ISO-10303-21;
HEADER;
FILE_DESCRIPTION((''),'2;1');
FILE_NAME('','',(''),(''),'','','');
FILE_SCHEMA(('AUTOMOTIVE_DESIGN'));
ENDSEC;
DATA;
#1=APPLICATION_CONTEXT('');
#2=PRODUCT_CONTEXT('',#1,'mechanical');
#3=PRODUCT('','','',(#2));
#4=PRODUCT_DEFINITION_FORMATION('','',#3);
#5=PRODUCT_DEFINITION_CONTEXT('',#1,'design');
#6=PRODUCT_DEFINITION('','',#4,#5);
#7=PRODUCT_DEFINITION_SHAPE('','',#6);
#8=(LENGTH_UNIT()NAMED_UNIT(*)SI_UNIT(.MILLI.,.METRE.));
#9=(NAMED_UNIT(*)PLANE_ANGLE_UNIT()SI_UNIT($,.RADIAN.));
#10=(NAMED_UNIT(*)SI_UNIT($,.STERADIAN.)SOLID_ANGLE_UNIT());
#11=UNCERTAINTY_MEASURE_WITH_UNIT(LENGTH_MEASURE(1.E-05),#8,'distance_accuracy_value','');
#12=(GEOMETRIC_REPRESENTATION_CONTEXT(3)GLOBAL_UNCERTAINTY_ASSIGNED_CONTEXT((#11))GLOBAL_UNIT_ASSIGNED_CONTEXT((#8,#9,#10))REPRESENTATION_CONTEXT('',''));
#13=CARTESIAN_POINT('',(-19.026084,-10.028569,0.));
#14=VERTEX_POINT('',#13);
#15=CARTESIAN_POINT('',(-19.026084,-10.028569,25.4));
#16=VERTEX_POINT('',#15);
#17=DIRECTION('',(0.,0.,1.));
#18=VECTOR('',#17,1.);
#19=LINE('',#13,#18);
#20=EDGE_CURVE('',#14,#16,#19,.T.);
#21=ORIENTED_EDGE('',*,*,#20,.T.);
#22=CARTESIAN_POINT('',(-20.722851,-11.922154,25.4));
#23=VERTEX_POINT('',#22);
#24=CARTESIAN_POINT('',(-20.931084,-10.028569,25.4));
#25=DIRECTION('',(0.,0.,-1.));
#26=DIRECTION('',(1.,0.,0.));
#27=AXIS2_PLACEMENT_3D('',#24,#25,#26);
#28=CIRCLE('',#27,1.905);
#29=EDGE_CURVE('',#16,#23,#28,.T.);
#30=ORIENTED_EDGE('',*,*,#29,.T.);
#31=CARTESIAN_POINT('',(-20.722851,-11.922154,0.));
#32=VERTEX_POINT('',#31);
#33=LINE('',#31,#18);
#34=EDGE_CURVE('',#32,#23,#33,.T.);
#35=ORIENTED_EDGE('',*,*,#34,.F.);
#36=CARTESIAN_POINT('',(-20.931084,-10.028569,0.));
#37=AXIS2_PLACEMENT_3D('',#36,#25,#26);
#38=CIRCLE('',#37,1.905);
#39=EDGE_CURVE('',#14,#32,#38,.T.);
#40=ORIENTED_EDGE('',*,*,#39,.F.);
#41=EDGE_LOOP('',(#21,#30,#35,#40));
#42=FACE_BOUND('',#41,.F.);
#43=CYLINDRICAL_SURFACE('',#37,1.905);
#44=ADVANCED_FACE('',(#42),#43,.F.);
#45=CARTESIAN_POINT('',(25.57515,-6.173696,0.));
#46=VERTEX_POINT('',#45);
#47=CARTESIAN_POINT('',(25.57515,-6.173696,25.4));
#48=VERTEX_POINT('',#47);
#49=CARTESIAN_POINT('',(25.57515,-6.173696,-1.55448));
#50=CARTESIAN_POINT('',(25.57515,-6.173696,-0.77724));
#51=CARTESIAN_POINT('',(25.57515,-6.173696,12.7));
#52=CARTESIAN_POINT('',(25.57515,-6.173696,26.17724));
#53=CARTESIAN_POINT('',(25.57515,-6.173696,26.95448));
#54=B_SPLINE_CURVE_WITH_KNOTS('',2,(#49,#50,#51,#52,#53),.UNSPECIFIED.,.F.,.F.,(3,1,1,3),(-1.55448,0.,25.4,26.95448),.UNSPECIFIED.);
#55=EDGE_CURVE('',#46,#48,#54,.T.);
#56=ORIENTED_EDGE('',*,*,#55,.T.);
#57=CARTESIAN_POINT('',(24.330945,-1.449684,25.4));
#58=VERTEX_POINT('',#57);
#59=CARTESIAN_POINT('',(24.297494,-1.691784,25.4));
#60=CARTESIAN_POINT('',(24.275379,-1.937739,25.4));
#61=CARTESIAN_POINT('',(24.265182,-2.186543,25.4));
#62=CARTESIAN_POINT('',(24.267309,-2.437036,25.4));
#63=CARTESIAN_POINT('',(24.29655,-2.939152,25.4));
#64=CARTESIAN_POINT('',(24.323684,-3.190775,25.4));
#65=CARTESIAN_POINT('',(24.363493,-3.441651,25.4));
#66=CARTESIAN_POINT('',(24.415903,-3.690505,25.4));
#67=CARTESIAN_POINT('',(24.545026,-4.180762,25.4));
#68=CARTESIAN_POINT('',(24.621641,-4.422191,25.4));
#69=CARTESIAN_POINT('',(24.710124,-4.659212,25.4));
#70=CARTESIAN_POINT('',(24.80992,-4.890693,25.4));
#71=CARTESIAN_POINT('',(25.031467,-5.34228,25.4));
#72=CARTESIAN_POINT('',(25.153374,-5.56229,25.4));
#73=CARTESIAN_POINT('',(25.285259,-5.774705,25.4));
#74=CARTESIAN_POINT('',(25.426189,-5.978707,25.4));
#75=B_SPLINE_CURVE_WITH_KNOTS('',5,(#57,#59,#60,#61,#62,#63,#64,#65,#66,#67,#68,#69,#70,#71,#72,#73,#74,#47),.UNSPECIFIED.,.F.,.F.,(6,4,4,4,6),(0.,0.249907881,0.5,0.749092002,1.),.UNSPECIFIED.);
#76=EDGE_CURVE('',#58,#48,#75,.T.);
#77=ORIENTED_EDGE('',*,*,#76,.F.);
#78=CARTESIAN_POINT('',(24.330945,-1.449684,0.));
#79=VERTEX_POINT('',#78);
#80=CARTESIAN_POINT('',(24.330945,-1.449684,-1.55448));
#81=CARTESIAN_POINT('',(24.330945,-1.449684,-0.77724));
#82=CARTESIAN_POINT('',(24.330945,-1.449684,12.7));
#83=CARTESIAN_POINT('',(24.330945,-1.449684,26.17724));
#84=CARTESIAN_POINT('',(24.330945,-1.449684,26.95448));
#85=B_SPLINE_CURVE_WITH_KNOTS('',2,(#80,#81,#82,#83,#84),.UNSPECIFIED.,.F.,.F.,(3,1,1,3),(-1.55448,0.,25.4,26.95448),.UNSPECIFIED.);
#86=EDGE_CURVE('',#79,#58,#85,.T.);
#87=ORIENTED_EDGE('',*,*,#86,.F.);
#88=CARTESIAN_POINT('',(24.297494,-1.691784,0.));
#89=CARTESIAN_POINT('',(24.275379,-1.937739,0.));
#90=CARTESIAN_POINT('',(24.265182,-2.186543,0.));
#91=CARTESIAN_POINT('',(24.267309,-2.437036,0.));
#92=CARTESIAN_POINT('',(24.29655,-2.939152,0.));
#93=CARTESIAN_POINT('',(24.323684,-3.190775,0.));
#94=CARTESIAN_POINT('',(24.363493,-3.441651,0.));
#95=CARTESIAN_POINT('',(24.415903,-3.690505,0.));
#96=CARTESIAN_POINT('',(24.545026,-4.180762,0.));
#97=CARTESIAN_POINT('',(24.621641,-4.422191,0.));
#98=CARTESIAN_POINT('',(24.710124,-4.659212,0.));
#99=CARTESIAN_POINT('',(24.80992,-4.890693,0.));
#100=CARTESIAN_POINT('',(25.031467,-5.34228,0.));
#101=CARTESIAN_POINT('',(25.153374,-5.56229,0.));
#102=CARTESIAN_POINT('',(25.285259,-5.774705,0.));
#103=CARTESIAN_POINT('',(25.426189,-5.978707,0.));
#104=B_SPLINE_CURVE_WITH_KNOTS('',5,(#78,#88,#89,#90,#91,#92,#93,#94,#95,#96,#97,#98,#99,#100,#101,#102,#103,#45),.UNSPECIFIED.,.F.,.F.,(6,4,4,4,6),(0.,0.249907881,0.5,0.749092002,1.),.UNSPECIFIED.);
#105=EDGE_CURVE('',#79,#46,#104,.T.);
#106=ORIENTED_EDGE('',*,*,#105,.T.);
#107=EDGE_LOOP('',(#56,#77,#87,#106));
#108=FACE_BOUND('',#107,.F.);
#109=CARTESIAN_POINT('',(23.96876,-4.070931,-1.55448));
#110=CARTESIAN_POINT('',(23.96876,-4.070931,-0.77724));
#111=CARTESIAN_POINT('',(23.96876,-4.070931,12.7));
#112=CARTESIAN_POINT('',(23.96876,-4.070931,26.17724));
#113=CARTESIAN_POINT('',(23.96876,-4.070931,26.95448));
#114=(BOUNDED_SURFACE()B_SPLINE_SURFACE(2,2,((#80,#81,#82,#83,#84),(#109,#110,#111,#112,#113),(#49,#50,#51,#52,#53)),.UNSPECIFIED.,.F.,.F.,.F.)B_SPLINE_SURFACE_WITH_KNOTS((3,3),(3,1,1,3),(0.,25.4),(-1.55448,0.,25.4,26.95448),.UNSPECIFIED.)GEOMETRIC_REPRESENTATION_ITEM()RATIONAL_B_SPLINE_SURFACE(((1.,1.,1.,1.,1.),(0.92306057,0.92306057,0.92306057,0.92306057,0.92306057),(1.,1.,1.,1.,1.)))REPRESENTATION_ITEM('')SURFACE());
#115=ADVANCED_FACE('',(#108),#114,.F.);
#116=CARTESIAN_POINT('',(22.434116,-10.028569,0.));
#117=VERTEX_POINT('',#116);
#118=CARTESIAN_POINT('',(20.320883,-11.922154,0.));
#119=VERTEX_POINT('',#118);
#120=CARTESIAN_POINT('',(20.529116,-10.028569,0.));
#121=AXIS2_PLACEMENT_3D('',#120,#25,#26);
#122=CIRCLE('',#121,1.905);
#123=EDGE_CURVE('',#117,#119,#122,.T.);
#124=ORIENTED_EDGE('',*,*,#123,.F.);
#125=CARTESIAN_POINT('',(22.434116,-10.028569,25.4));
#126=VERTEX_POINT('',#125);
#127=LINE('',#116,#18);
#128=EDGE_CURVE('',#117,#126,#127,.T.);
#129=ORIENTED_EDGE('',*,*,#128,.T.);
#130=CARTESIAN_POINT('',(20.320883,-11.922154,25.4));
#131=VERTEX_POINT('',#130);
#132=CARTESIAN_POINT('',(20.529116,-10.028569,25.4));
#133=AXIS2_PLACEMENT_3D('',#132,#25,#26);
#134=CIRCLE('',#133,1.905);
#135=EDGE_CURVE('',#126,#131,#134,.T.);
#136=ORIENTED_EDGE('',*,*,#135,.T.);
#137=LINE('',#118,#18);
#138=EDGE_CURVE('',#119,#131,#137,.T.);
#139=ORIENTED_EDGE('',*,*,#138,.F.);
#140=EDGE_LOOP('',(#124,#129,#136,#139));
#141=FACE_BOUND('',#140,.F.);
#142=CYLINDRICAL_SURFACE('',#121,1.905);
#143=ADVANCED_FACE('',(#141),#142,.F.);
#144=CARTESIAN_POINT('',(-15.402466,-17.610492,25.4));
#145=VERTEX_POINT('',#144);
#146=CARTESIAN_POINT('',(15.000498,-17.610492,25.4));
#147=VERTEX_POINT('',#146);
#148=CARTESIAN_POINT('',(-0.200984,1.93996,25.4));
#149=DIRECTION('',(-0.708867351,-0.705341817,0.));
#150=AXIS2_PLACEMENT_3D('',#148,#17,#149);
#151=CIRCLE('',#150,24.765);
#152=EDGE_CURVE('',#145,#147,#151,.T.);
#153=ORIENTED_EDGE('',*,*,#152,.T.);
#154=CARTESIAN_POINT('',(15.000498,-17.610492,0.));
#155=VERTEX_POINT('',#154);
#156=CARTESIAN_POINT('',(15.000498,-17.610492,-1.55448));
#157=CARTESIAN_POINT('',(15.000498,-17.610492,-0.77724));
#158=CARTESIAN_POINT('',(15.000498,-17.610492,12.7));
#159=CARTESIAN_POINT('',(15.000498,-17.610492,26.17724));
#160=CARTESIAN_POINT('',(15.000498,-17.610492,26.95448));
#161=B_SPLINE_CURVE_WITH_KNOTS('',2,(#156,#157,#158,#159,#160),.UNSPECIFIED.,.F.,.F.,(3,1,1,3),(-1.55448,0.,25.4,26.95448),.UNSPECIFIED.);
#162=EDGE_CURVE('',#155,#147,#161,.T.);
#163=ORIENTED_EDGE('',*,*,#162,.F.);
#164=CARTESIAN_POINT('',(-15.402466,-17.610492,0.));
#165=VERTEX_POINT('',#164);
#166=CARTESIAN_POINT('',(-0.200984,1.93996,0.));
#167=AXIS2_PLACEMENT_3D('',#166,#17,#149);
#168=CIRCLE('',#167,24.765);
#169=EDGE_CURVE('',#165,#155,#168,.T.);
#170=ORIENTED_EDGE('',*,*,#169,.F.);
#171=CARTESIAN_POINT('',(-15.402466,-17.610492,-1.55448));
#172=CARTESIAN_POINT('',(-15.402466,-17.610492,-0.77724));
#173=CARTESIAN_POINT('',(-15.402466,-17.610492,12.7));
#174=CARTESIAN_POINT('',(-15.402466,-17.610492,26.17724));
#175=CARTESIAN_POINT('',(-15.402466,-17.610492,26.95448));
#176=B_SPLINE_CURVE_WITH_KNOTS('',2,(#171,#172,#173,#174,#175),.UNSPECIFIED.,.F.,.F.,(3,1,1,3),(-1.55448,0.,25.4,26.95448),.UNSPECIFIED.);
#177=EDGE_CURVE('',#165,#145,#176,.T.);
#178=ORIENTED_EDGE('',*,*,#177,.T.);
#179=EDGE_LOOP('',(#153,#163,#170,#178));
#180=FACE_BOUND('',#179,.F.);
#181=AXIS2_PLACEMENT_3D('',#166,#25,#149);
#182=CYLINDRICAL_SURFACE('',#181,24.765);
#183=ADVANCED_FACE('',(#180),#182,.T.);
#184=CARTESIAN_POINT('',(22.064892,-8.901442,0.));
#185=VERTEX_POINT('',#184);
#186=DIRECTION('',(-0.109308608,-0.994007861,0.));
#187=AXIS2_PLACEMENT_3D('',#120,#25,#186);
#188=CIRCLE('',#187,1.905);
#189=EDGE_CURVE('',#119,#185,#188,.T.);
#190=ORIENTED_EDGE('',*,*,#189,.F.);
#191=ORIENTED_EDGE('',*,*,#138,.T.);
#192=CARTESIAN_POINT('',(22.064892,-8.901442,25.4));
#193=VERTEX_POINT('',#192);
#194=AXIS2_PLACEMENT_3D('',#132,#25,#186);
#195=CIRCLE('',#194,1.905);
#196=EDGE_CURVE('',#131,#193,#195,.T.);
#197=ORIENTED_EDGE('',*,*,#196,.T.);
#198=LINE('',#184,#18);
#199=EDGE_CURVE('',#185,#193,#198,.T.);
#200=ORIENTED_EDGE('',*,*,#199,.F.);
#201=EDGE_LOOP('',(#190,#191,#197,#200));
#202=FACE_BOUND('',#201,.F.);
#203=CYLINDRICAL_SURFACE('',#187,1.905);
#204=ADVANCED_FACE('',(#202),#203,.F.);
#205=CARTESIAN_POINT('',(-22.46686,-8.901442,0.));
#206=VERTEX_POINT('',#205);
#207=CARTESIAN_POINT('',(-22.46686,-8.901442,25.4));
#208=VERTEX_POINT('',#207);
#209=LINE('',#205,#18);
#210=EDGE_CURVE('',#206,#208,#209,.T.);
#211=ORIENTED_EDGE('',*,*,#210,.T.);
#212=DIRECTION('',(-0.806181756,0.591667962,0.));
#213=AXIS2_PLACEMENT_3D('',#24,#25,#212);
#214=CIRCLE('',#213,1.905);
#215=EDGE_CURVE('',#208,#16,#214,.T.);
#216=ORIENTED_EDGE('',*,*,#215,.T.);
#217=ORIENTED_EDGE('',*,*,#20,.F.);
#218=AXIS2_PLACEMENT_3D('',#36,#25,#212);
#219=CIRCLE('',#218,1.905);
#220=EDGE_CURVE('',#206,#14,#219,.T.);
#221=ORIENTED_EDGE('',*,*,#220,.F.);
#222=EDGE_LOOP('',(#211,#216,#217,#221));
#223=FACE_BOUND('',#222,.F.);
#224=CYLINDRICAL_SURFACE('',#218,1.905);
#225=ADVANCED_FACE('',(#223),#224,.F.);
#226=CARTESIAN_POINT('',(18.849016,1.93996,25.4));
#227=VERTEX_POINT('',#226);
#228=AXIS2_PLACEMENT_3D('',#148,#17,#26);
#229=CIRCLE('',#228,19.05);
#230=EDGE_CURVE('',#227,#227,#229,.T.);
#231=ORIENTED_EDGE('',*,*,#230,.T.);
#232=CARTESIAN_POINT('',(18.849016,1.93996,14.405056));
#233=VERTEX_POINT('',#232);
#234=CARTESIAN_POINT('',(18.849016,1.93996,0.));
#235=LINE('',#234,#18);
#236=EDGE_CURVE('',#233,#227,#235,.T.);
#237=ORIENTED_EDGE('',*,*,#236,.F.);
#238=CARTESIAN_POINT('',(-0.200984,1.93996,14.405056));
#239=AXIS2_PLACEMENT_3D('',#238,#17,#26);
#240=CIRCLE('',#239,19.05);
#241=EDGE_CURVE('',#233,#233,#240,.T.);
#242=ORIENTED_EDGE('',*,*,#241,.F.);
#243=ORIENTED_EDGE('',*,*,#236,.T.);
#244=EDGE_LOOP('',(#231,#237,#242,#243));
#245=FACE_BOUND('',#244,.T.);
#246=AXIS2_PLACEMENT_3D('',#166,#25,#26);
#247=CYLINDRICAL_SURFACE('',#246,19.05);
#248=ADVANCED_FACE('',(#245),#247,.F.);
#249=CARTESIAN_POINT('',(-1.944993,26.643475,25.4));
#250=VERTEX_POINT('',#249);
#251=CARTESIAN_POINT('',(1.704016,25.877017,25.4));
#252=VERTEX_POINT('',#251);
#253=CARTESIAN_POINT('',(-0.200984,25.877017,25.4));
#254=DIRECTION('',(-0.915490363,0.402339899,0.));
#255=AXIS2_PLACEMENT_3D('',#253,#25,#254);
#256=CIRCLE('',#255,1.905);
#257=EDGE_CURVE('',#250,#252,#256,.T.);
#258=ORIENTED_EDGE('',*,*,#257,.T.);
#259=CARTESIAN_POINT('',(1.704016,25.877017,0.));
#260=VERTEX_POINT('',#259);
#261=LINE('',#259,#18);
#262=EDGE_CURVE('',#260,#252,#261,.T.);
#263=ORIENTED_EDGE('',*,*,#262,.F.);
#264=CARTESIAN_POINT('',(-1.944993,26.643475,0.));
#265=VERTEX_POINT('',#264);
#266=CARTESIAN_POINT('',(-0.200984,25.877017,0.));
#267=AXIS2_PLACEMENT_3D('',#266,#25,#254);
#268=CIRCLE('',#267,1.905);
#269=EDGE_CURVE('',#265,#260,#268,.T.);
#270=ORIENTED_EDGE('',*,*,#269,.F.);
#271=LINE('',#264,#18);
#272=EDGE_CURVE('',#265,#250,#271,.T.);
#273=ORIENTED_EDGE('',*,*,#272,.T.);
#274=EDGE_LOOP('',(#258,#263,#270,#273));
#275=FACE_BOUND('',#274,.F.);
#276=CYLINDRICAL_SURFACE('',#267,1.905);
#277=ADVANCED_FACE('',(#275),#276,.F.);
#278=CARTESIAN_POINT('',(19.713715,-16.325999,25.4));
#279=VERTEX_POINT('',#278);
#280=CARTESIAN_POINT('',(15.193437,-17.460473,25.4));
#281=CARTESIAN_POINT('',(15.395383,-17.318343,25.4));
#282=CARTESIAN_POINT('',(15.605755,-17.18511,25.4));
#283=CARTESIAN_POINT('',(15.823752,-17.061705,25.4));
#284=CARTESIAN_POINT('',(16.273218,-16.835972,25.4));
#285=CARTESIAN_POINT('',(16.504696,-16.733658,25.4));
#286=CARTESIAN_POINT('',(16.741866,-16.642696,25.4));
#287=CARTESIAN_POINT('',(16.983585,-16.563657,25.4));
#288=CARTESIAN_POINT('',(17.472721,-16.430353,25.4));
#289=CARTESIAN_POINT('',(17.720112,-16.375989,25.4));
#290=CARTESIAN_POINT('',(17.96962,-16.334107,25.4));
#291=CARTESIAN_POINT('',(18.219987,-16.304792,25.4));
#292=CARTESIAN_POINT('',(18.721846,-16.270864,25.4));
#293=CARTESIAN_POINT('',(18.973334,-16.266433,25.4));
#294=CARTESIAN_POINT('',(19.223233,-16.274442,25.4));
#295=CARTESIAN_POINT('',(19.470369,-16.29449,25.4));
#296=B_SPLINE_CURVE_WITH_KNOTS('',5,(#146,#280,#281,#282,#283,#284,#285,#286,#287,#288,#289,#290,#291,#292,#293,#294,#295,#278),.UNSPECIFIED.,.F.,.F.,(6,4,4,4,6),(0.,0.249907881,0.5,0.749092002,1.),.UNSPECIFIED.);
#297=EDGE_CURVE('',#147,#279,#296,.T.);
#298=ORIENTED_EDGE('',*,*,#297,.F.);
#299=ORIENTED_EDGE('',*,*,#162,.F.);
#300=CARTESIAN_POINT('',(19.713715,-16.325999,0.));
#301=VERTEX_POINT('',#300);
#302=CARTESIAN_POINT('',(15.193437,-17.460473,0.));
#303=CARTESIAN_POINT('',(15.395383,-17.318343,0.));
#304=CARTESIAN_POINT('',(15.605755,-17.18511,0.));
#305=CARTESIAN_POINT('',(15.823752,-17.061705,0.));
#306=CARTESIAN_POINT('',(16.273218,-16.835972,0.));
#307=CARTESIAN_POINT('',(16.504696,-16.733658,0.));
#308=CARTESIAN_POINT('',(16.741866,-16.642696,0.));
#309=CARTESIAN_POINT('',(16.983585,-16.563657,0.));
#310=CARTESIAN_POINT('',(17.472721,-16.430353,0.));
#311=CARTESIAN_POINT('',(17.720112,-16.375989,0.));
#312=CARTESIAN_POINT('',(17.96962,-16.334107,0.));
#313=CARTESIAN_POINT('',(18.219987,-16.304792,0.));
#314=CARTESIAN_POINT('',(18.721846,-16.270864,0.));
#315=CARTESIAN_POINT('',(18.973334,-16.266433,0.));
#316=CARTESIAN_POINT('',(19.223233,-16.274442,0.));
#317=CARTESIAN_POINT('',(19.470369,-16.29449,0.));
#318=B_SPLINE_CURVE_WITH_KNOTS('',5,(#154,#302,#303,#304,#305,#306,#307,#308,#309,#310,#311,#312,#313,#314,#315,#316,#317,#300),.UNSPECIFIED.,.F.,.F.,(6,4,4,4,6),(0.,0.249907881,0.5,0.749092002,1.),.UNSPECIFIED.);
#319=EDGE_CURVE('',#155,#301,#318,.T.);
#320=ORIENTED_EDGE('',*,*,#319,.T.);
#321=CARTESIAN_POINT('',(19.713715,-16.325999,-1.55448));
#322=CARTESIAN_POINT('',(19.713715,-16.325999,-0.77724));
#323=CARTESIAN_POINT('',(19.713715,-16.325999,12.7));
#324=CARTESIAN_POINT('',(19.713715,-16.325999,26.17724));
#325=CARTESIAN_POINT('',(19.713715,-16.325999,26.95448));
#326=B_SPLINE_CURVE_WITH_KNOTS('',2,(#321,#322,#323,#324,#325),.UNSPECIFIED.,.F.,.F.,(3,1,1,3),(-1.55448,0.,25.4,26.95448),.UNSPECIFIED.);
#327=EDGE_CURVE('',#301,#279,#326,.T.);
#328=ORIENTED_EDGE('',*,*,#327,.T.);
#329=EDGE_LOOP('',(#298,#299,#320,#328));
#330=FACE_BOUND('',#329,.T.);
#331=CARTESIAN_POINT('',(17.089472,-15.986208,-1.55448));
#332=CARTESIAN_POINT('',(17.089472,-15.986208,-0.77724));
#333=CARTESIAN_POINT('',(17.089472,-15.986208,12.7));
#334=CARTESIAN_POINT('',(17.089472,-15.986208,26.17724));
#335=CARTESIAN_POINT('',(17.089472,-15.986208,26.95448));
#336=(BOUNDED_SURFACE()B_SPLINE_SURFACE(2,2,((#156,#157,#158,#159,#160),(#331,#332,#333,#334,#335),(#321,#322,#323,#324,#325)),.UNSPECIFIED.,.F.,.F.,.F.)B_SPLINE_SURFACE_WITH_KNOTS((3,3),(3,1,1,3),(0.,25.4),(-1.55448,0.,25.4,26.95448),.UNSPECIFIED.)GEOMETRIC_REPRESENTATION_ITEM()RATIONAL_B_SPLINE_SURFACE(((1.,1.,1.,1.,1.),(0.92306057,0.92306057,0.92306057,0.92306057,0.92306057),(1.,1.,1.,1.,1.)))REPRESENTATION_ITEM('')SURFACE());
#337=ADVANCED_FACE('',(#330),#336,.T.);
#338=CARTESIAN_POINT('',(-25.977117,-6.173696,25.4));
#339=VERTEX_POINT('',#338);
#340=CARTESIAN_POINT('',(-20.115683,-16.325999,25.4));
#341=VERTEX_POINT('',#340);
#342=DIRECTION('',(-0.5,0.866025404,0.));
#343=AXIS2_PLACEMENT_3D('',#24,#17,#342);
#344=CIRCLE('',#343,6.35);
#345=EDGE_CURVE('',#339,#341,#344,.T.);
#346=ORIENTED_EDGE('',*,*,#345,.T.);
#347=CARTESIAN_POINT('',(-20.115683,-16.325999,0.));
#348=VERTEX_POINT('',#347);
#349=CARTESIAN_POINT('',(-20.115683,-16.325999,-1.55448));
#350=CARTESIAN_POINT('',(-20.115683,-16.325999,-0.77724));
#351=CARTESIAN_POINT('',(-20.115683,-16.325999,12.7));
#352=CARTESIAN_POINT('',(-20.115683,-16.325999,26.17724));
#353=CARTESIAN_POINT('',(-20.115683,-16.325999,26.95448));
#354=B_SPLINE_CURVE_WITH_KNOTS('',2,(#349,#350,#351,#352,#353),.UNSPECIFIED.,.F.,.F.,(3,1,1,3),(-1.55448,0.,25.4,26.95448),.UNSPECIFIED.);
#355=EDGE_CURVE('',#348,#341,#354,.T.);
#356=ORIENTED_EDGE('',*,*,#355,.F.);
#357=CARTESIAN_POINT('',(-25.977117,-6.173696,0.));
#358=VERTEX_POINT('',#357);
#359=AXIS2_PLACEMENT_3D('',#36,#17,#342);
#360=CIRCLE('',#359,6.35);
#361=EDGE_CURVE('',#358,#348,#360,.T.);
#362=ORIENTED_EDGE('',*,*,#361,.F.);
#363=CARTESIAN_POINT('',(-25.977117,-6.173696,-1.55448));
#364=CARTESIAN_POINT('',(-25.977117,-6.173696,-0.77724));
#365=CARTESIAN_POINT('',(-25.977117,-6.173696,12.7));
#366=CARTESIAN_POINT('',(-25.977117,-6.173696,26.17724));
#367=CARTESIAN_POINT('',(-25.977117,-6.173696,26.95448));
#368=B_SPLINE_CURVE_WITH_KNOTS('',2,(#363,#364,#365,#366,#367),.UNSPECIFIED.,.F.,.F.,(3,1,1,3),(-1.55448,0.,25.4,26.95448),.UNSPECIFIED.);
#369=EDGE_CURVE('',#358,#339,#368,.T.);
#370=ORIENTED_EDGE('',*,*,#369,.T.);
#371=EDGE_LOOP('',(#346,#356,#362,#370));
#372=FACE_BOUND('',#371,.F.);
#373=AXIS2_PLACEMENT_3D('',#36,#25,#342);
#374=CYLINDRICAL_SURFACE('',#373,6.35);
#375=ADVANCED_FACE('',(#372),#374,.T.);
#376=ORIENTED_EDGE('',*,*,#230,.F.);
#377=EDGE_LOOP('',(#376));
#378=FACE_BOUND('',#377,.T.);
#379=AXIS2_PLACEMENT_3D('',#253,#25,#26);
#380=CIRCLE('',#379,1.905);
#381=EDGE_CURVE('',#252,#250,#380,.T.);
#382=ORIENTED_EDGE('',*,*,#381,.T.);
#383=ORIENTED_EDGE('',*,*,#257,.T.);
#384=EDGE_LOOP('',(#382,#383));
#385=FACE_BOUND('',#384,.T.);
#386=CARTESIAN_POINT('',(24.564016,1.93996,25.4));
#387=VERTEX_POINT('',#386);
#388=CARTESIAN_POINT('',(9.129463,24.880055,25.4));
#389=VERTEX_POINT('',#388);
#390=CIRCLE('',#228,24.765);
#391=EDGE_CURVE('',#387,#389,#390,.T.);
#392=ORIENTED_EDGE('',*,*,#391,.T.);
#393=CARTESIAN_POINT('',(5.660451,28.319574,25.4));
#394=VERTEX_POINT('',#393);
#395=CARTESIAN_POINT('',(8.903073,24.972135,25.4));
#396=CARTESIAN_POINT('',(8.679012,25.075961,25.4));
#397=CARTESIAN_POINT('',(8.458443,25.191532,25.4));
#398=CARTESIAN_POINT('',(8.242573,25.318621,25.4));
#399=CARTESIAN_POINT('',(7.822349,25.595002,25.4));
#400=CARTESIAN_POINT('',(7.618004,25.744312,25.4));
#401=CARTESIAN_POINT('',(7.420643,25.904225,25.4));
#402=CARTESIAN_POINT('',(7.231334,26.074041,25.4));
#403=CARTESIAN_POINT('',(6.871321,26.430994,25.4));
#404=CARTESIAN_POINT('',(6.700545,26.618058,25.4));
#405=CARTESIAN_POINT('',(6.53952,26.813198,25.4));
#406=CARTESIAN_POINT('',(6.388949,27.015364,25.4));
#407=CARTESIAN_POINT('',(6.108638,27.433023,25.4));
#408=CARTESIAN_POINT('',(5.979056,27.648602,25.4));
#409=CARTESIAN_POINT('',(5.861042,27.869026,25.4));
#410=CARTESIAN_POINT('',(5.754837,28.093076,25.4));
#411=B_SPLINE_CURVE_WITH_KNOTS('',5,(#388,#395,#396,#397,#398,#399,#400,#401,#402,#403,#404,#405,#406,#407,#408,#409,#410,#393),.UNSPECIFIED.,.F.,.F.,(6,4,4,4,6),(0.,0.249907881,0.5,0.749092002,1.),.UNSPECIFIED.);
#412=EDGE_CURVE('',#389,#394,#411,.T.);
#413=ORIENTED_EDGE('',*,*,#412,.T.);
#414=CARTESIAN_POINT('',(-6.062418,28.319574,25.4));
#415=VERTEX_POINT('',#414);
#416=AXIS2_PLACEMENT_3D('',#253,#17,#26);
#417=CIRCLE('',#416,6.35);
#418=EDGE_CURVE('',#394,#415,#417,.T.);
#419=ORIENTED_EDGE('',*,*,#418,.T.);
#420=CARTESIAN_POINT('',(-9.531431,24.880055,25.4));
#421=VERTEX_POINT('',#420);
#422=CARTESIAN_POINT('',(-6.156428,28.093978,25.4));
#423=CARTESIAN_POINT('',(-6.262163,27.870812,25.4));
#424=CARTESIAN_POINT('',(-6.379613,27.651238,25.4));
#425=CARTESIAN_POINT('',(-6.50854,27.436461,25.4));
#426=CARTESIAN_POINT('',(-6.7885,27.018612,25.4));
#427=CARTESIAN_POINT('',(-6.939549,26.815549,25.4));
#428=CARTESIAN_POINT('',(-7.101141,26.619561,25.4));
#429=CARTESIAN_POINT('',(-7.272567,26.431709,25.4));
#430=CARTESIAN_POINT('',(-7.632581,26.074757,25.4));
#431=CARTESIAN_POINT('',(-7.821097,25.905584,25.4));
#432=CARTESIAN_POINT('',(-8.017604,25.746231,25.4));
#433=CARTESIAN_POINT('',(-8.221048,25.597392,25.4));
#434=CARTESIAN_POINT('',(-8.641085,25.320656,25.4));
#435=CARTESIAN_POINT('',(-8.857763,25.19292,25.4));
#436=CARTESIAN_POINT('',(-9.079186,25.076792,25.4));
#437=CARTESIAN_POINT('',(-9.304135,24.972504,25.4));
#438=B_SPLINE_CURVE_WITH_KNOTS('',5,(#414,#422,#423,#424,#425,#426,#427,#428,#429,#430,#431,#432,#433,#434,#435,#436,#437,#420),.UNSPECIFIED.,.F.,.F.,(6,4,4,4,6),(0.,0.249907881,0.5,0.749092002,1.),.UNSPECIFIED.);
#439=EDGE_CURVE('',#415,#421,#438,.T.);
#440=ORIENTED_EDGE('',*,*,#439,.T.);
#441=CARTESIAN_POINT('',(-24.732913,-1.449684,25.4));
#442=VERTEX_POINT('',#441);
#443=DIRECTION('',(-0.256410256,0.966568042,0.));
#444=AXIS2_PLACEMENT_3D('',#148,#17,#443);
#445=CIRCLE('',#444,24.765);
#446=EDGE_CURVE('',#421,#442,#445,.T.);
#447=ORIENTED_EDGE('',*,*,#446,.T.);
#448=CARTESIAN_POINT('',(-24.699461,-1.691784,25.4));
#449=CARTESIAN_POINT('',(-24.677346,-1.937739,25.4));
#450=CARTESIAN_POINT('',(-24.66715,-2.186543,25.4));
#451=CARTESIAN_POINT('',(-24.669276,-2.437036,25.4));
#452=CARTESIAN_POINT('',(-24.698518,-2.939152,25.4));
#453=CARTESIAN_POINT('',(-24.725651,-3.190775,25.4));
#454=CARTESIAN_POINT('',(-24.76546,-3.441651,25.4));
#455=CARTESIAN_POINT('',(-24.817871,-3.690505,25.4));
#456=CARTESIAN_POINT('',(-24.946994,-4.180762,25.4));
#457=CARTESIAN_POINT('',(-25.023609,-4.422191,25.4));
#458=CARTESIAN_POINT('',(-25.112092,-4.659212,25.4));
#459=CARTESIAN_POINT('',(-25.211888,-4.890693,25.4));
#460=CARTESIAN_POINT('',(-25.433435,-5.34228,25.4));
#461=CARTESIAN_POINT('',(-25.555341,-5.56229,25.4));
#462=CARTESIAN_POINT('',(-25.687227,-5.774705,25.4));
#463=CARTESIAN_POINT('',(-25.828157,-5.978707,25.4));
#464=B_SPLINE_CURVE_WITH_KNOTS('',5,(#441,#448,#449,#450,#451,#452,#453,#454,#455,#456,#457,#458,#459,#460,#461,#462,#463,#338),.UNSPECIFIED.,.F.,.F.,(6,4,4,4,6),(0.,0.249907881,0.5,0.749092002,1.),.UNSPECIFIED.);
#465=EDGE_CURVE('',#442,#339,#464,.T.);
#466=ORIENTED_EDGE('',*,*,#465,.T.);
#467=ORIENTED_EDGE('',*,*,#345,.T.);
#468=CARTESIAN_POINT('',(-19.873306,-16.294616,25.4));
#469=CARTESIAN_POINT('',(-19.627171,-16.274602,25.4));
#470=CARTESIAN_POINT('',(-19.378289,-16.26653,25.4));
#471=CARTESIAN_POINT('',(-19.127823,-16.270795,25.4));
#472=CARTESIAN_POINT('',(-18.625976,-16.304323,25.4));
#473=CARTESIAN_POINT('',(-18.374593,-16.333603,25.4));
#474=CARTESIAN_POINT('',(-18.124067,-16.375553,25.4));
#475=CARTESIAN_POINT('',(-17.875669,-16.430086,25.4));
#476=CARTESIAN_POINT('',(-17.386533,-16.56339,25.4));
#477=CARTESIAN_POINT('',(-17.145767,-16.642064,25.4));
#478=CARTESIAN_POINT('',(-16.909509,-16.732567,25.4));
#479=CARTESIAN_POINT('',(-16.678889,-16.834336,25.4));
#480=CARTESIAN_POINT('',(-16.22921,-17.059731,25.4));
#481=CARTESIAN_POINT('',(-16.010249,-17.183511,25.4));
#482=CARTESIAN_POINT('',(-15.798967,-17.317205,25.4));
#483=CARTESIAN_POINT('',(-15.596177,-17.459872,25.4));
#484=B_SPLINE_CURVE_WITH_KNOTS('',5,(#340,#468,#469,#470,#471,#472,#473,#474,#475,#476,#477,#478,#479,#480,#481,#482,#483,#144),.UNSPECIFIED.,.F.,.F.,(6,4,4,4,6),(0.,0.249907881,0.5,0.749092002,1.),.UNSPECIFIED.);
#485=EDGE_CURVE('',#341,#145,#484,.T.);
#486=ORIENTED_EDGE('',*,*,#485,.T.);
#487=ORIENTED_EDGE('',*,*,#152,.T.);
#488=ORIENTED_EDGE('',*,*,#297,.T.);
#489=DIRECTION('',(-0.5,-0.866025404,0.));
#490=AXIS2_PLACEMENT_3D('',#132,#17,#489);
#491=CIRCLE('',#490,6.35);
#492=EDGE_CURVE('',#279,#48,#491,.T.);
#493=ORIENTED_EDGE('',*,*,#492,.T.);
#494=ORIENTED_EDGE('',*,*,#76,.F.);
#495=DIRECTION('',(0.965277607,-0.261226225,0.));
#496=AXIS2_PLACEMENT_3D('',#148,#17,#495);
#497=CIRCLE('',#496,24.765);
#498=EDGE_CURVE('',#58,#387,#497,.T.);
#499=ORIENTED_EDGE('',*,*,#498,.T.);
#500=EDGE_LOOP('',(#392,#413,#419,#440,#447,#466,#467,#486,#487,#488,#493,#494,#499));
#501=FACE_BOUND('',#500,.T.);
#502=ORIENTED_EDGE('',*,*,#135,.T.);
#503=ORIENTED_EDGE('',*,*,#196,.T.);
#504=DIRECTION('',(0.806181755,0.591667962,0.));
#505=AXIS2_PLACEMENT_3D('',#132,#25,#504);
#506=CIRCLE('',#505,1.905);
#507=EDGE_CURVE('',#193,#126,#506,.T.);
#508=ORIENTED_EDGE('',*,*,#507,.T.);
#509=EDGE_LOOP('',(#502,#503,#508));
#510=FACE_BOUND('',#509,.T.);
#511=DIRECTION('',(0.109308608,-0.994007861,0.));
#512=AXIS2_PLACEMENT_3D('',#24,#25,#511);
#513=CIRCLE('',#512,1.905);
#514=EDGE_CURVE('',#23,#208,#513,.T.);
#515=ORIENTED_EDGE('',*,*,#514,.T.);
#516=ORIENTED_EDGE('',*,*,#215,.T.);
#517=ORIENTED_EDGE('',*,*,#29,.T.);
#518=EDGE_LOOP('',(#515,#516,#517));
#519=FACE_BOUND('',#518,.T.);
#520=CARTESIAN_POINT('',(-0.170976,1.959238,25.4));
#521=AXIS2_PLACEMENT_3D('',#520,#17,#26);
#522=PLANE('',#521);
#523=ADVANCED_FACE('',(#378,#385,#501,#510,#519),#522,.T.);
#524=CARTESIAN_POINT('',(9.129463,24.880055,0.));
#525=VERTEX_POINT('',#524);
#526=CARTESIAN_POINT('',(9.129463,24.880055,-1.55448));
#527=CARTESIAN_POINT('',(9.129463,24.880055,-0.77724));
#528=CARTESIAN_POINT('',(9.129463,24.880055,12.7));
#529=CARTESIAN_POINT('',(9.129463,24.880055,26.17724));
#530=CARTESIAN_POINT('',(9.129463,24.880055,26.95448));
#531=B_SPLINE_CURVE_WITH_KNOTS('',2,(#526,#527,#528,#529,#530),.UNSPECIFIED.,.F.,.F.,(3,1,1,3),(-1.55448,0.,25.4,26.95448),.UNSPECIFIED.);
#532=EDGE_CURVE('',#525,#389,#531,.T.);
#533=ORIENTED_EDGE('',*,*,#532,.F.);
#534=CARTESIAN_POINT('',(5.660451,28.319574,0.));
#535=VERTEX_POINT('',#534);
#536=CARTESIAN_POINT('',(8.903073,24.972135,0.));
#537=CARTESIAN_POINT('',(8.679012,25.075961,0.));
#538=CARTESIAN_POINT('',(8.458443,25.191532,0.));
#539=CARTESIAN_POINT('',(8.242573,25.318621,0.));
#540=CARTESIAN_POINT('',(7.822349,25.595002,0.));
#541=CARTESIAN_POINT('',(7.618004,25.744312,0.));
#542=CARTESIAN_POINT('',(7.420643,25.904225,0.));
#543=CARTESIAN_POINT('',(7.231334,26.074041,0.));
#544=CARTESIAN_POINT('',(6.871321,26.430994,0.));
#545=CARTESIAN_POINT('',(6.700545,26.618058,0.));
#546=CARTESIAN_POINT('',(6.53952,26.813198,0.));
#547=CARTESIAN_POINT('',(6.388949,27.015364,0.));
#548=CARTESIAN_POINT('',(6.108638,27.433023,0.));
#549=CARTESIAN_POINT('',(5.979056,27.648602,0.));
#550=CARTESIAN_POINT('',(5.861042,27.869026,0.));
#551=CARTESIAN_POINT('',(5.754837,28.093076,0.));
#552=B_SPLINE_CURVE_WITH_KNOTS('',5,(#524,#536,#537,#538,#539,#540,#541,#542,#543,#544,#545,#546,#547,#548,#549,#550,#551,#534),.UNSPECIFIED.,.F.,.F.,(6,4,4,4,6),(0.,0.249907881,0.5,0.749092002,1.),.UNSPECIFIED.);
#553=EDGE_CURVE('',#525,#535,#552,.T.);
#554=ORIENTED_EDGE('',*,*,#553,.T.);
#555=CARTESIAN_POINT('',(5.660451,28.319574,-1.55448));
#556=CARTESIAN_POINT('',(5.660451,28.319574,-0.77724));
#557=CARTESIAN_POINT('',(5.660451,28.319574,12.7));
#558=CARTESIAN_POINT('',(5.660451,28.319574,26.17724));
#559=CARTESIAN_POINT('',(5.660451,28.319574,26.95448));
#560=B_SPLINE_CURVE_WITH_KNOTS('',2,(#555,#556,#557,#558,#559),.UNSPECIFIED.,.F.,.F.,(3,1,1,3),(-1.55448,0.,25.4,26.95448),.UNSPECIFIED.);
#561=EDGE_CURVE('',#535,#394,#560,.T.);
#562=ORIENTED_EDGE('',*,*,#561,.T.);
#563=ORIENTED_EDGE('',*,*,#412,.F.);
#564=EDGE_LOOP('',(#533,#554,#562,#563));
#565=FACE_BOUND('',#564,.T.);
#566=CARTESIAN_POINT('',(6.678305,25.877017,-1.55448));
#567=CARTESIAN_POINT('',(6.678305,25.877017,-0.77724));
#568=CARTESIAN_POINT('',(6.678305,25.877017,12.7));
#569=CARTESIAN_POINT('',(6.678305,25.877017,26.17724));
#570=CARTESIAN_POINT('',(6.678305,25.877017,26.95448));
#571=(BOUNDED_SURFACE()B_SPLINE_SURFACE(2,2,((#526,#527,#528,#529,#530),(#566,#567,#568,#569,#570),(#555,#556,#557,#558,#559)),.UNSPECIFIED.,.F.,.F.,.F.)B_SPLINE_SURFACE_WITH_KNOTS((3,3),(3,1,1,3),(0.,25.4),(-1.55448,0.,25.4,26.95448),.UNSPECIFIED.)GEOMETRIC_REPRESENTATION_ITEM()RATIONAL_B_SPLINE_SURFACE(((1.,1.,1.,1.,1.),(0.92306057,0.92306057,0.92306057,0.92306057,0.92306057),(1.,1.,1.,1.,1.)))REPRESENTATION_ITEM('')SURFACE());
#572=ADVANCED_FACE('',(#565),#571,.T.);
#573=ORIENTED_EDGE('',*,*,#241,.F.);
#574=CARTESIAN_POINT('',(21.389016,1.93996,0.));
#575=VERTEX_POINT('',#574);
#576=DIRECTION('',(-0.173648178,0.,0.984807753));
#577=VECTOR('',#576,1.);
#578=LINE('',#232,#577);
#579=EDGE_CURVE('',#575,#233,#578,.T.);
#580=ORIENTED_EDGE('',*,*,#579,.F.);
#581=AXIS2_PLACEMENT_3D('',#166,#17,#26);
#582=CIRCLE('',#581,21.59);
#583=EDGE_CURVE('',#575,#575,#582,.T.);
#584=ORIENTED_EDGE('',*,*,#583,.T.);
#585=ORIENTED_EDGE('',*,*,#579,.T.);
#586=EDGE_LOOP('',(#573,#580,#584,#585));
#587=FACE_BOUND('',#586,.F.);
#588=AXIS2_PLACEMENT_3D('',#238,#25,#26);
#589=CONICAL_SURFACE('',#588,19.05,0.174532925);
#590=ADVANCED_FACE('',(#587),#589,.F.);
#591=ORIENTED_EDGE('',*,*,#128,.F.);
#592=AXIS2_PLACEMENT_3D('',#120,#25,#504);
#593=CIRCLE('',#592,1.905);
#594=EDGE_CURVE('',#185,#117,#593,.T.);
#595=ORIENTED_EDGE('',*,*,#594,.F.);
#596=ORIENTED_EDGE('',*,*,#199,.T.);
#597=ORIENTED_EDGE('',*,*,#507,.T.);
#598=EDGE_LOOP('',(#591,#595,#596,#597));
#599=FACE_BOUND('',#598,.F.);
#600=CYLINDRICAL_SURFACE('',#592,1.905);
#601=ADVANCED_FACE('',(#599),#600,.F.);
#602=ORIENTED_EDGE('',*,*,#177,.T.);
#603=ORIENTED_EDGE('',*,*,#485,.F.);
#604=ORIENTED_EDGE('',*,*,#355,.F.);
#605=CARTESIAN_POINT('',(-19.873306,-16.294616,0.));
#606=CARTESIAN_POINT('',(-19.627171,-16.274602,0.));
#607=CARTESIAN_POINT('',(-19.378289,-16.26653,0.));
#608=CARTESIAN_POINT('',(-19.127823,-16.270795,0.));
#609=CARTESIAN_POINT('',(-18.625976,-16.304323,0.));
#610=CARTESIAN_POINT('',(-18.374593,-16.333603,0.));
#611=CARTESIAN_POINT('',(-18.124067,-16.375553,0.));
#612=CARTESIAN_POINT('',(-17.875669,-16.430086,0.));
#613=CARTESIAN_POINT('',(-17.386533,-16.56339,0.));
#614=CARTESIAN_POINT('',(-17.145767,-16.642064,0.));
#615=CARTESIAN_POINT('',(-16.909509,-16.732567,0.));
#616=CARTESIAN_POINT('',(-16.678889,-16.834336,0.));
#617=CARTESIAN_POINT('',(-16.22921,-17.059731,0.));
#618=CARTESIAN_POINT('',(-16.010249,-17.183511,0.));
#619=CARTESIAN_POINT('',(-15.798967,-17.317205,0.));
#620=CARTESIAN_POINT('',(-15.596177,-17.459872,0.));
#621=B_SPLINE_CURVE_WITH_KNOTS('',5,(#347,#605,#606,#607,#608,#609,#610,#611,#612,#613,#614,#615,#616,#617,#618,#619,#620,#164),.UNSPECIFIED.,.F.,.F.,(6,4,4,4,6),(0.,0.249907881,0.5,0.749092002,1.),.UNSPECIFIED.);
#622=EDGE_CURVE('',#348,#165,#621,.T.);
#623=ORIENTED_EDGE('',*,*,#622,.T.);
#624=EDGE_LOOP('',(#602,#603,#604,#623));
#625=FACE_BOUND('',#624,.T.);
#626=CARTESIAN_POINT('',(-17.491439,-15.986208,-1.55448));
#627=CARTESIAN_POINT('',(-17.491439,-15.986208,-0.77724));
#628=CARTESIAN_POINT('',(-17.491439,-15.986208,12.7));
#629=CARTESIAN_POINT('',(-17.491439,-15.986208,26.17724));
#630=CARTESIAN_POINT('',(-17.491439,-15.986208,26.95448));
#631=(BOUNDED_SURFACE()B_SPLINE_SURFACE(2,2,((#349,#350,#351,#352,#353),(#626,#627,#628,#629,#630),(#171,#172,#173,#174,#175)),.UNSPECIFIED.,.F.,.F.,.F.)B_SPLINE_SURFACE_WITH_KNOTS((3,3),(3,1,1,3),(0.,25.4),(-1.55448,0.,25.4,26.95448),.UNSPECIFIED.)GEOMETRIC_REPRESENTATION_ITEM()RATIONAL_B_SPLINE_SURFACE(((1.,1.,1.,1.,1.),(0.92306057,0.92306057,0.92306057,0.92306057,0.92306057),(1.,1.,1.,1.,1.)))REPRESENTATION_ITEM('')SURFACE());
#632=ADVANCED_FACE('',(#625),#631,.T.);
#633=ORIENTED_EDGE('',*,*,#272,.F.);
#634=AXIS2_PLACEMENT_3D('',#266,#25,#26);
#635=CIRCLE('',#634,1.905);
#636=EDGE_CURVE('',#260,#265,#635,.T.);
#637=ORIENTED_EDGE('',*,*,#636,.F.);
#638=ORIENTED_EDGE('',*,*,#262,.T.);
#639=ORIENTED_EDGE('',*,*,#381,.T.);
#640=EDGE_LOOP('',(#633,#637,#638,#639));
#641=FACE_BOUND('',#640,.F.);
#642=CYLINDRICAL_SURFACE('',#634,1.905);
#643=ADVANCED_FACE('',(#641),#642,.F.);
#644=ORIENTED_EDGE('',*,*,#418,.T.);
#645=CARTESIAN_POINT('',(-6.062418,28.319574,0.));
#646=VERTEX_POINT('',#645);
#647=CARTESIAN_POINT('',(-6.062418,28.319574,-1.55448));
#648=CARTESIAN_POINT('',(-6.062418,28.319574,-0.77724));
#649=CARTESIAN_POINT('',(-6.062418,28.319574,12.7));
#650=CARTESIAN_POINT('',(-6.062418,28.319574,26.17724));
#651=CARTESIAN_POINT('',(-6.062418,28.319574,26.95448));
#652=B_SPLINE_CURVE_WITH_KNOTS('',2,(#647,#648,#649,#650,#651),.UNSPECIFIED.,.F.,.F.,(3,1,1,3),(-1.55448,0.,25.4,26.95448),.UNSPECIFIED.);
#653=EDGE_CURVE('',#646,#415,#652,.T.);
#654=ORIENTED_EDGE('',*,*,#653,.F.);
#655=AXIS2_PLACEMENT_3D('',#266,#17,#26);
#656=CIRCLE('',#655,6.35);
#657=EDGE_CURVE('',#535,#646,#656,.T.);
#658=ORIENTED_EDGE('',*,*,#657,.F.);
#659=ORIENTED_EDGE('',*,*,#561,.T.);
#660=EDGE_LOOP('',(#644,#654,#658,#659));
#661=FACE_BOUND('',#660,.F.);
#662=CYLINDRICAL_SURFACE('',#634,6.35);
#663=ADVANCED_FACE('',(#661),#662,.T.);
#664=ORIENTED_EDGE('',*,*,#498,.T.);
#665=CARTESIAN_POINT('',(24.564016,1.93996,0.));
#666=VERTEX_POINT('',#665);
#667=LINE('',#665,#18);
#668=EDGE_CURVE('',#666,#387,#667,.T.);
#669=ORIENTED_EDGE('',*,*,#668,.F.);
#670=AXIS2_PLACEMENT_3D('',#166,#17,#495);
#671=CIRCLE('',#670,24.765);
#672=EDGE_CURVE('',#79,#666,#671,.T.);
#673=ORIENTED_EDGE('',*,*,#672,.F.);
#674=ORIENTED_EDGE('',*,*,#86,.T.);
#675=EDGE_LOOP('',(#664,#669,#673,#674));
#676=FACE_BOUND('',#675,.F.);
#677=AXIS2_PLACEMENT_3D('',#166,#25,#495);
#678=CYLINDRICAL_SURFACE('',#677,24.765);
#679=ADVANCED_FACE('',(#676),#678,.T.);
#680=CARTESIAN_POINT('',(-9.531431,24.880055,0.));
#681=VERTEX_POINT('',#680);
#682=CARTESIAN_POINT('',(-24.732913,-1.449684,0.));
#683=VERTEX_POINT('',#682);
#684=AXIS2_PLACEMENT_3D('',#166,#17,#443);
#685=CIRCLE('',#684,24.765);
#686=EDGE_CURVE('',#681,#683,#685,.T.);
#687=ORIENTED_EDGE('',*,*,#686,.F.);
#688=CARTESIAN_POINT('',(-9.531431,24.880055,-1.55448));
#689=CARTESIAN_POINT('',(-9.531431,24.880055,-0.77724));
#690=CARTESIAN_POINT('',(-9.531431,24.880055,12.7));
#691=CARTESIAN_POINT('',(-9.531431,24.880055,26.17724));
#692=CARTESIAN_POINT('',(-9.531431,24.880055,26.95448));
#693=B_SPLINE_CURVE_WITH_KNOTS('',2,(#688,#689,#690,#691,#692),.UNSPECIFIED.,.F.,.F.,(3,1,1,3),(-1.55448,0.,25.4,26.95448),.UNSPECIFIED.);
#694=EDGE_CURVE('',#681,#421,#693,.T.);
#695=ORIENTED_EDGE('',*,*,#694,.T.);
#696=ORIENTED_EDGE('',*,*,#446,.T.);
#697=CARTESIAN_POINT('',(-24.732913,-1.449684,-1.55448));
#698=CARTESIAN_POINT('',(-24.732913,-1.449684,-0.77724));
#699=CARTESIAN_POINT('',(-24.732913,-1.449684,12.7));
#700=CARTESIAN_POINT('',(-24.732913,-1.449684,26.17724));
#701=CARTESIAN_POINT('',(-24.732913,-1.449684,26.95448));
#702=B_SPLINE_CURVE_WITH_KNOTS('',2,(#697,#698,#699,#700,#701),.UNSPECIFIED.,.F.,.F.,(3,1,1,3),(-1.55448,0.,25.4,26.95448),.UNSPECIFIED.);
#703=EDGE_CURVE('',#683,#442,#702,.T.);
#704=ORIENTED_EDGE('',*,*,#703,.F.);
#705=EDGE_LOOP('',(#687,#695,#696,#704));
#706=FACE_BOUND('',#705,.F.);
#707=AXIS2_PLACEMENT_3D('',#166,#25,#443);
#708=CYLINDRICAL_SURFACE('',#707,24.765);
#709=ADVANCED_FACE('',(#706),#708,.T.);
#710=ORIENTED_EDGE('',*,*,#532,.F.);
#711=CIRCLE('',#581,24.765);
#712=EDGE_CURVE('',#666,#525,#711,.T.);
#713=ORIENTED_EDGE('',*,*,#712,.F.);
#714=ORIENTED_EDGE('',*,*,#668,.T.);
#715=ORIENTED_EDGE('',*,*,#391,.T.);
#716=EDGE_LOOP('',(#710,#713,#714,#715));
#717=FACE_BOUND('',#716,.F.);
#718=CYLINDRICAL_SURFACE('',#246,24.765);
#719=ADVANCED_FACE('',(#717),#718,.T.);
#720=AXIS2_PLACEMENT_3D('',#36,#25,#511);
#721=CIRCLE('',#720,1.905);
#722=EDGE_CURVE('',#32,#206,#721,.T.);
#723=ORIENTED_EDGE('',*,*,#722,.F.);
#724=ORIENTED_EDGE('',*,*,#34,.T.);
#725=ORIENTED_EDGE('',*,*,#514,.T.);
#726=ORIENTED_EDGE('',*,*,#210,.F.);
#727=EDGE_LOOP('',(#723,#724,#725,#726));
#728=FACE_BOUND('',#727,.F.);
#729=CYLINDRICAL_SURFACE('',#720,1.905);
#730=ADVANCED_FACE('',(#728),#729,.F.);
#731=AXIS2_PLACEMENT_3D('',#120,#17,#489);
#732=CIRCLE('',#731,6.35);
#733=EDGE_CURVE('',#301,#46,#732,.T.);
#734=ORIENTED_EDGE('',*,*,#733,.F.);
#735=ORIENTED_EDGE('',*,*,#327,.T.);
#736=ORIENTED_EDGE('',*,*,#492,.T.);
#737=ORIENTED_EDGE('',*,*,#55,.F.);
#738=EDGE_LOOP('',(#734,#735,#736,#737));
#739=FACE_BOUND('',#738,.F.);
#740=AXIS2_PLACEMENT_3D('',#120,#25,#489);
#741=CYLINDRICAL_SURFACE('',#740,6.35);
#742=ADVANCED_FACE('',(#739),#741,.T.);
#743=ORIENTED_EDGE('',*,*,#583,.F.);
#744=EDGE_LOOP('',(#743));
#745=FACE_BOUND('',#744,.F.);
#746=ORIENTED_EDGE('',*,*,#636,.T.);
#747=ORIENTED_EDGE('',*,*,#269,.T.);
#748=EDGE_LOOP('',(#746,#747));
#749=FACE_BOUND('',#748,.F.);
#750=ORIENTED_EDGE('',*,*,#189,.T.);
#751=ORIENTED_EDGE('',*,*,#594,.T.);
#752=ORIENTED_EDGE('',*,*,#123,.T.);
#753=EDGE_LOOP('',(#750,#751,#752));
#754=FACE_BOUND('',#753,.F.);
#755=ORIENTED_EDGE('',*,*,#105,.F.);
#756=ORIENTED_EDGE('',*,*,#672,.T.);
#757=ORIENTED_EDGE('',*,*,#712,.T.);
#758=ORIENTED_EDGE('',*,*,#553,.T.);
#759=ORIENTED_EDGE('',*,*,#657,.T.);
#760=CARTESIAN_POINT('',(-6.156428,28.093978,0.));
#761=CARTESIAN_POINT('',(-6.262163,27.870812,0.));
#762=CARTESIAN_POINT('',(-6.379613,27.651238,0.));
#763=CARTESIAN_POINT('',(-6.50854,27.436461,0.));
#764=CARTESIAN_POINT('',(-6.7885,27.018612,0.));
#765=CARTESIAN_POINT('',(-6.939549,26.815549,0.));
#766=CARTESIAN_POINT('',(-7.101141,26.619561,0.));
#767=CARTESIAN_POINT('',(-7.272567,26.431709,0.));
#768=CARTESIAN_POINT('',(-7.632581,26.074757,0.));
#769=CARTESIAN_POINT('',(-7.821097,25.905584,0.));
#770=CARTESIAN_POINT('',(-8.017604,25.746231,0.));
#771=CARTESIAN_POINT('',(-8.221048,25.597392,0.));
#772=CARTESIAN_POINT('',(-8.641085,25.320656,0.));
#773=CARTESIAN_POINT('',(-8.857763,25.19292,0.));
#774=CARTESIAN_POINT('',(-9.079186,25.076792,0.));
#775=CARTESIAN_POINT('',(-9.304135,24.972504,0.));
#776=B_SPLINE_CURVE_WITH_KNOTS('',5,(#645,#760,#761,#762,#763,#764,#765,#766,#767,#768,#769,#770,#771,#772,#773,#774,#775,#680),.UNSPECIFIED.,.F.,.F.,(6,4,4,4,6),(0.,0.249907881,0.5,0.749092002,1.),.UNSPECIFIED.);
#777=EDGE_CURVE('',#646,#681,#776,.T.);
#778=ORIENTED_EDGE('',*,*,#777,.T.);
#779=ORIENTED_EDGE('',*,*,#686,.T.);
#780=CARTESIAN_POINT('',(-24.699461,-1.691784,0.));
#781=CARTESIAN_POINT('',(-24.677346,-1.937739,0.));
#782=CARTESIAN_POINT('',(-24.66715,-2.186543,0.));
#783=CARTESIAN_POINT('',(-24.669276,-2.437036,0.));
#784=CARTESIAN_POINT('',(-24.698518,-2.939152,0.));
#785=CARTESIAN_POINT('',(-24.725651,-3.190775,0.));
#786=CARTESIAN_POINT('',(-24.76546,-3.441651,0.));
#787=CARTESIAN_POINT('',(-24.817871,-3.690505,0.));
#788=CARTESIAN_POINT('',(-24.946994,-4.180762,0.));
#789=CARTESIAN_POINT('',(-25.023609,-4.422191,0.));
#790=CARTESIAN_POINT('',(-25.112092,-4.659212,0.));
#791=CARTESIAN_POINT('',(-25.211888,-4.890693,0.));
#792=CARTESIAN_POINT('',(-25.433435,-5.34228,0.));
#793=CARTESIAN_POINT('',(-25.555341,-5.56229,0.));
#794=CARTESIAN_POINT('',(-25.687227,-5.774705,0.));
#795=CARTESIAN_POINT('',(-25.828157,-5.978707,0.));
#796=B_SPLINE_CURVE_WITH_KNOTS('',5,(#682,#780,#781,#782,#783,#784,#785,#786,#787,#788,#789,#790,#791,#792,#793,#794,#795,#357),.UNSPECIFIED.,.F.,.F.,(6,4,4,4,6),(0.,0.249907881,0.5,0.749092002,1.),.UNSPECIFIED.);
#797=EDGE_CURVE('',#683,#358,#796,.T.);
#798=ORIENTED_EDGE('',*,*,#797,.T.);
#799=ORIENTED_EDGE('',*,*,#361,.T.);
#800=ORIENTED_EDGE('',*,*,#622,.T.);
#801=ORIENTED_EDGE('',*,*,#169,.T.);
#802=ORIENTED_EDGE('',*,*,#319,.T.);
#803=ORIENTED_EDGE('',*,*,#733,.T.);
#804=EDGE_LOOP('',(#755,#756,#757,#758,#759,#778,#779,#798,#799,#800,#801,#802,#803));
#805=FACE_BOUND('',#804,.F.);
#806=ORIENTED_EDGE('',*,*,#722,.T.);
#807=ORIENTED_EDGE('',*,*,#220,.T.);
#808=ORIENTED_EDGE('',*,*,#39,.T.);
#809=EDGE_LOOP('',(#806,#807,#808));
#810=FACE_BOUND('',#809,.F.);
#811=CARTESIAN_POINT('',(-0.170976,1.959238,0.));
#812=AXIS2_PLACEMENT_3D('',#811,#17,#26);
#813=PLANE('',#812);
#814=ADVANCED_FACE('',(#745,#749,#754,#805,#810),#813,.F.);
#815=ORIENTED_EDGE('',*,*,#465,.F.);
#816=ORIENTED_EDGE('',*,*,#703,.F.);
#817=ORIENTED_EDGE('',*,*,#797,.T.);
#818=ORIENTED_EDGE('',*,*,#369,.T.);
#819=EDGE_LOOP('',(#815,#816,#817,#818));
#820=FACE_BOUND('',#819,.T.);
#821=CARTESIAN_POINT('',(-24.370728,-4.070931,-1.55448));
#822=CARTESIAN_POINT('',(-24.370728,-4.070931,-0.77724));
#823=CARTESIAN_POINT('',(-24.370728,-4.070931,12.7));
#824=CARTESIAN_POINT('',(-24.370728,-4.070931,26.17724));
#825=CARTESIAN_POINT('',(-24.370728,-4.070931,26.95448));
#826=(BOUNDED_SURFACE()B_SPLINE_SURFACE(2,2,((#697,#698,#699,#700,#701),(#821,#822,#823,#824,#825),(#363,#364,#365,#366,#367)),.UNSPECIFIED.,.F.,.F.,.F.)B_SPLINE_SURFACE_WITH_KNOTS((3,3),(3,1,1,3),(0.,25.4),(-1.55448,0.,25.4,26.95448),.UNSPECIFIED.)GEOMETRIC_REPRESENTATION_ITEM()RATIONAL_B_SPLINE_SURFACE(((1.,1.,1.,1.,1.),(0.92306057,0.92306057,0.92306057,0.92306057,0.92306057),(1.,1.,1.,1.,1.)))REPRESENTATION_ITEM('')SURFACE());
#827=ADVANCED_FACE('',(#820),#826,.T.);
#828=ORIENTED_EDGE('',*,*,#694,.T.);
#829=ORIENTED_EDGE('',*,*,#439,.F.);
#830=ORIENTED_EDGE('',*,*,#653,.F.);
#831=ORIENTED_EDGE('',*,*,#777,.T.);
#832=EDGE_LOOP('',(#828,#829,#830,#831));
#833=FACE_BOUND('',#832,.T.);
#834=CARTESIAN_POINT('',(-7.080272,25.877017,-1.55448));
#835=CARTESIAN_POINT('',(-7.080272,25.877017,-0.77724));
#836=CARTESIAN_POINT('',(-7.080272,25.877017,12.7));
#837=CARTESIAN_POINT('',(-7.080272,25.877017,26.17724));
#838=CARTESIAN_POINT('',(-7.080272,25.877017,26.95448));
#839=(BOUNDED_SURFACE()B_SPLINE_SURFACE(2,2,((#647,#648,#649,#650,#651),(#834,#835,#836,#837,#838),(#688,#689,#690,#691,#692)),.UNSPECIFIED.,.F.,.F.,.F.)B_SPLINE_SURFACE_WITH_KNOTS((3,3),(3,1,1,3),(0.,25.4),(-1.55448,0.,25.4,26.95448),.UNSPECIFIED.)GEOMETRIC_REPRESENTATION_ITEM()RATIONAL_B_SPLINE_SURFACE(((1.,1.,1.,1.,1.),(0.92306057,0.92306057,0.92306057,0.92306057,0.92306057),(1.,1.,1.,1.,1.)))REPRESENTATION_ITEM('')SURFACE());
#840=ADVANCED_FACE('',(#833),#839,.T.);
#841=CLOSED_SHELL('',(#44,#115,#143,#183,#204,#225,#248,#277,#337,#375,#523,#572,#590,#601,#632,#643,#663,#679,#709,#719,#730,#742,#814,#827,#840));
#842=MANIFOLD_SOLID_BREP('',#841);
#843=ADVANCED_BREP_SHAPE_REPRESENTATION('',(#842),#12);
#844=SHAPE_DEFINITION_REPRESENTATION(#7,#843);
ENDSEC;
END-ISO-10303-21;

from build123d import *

# Parameters (mm, degrees)
F0_R     = 19.05
F1_DEPTH = 25.4
F2_R     = 6.35
F3_SIZE2 = 14.4050558218
F3_SIZE  = 2.54


with BuildPart() as f1:
    # F0 (on Top) → F1 (new body)
    with BuildSketch(Plane.XY):
        with BuildLine():
            ThreePointArc((23.7041161885, -4.5293078328), (24.3480999851, -1.3231236326), (24.564016243, 1.9399596371))
            ThreePointArc((24.564016243, 1.9399596371), (19.4276047684, 17.0404145143), (6.149016243, 25.8770172048))
            ThreePointArc((6.149016243, 25.8770172048), (3.8641251316, 26.3690430158), (1.5430253852, 26.6434747131))
            ThreePointArc((1.5430253852, 26.6434747131), (1.6633341365, 26.2686085633), (1.704016243, 25.8770172048))
            ThreePointArc((1.704016243, 25.8770172048), (-0.5925751155, 24.0126993113), (-1.9449928991, 26.6434747131))
            ThreePointArc((-1.9449928991, 26.6434747131), (-4.2660926456, 26.3690430158), (-6.550983757, 25.8770172048))
            ThreePointArc((-6.550983757, 25.8770172048), (-21.6481028817, 14.3224596371), (-24.1060837025, -4.5293078328))
            ThreePointArc((-24.1060837025, -4.5293078328), (-23.3897449984, -6.7540944856), (-22.4668599467, -8.9014416794))
            ThreePointArc((-22.4668599467, -8.9014416794), (-20.3380528201, -8.218226811), (-19.0260837025, -10.0285691468))
            ThreePointArc((-19.0260837025, -10.0285691468), (-19.5123327253, -11.2998561579), (-20.7228508045, -11.9221541225))
            ThreePointArc((-20.7228508045, -11.9221541225), (-19.3246361098, -13.795069619), (-17.7560837025, -15.5278304608))
            ThreePointArc((-17.7560837025, -15.5278304608), (-0.200983757, -22.8250403629), (17.3541161885, -15.5278304608))
            ThreePointArc((17.3541161885, -15.5278304608), (18.9226685958, -13.795069619), (20.3208832906, -11.9221541225))
            ThreePointArc((20.3208832906, -11.9221541225), (18.8793377943, -9.0760691468), (22.0648924327, -8.9014416794))
            ThreePointArc((22.0648924327, -8.9014416794), (22.9877774845, -6.7540944856), (23.7041161885, -4.5293078328))
        make_face()
        with Locations((-0.200983757, 1.9399596371)):
            Circle(F0_R, mode=Mode.SUBTRACT)
        with BuildLine():
            ThreePointArc((1.5430253852, 26.6434747131), (3.8641251316, 26.3690430158), (6.149016243, 25.8770172048))
            ThreePointArc((6.149016243, 25.8770172048), (-0.200983757, 32.2270172048), (-6.550983757, 25.8770172048))
            ThreePointArc((-6.550983757, 25.8770172048), (-4.2660926456, 26.3690430158), (-1.9449928991, 26.6434747131))
            ThreePointArc((-1.9449928991, 26.6434747131), (-0.200983757, 27.7820172048), (1.5430253852, 26.6434747131))
        make_face()
        with BuildLine():
            ThreePointArc((17.3541161885, -15.5278304608), (26.0283775025, -13.2035691468), (23.7041161885, -4.5293078328))
            ThreePointArc((23.7041161885, -4.5293078328), (22.9877774845, -6.7540944856), (22.0648924327, -8.9014416794))
            ThreePointArc((22.0648924327, -8.9014416794), (22.3394585243, -9.4355382645), (22.4341161885, -10.0285691468))
            ThreePointArc((22.4341161885, -10.0285691468), (21.8004031997, -11.447320124), (20.3208832906, -11.9221541225))
            ThreePointArc((20.3208832906, -11.9221541225), (18.9226685958, -13.795069619), (17.3541161885, -15.5278304608))
        make_face()
        with BuildLine():
            ThreePointArc((-22.4668599467, -8.9014416794), (-23.3897449984, -6.7540944856), (-24.1060837025, -4.5293078328))
            ThreePointArc((-24.1060837025, -4.5293078328), (-26.4303450165, -13.2035691468), (-17.7560837025, -15.5278304608))
            ThreePointArc((-17.7560837025, -15.5278304608), (-19.3246361098, -13.795069619), (-20.7228508045, -11.9221541225))
            ThreePointArc((-20.7228508045, -11.9221541225), (-22.5808620967, -10.9810691468), (-22.4668599467, -8.9014416794))
        make_face()
    extrude(amount=F1_DEPTH)

    # F2
    f2_edges = [f1.edges().sort_by_distance(p)[0] for p in [
        (-24.106084, -4.529308, 12.7),
        (17.354116, -15.52783, 12.7),
        (6.149016, 25.877017, 12.7),
        (23.704116, -4.529308, 12.7),
        (-6.550984, 25.877017, 12.7),
        (-17.756084, -15.52783, 12.7),
    ]]
    fillet(f2_edges, radius=F2_R)

    # F3
    f3_edges = [f1.edges().sort_by_distance(p)[0] for p in [
        (-19.250984, 1.93996, 0),
    ]]
    f3_side = f1.faces().sort_by_distance((20.577327, 13.936323, 0))[0]
    chamfer(f3_edges, length=F3_SIZE, length2=F3_SIZE2, reference=f3_side)


solid = f1.part
